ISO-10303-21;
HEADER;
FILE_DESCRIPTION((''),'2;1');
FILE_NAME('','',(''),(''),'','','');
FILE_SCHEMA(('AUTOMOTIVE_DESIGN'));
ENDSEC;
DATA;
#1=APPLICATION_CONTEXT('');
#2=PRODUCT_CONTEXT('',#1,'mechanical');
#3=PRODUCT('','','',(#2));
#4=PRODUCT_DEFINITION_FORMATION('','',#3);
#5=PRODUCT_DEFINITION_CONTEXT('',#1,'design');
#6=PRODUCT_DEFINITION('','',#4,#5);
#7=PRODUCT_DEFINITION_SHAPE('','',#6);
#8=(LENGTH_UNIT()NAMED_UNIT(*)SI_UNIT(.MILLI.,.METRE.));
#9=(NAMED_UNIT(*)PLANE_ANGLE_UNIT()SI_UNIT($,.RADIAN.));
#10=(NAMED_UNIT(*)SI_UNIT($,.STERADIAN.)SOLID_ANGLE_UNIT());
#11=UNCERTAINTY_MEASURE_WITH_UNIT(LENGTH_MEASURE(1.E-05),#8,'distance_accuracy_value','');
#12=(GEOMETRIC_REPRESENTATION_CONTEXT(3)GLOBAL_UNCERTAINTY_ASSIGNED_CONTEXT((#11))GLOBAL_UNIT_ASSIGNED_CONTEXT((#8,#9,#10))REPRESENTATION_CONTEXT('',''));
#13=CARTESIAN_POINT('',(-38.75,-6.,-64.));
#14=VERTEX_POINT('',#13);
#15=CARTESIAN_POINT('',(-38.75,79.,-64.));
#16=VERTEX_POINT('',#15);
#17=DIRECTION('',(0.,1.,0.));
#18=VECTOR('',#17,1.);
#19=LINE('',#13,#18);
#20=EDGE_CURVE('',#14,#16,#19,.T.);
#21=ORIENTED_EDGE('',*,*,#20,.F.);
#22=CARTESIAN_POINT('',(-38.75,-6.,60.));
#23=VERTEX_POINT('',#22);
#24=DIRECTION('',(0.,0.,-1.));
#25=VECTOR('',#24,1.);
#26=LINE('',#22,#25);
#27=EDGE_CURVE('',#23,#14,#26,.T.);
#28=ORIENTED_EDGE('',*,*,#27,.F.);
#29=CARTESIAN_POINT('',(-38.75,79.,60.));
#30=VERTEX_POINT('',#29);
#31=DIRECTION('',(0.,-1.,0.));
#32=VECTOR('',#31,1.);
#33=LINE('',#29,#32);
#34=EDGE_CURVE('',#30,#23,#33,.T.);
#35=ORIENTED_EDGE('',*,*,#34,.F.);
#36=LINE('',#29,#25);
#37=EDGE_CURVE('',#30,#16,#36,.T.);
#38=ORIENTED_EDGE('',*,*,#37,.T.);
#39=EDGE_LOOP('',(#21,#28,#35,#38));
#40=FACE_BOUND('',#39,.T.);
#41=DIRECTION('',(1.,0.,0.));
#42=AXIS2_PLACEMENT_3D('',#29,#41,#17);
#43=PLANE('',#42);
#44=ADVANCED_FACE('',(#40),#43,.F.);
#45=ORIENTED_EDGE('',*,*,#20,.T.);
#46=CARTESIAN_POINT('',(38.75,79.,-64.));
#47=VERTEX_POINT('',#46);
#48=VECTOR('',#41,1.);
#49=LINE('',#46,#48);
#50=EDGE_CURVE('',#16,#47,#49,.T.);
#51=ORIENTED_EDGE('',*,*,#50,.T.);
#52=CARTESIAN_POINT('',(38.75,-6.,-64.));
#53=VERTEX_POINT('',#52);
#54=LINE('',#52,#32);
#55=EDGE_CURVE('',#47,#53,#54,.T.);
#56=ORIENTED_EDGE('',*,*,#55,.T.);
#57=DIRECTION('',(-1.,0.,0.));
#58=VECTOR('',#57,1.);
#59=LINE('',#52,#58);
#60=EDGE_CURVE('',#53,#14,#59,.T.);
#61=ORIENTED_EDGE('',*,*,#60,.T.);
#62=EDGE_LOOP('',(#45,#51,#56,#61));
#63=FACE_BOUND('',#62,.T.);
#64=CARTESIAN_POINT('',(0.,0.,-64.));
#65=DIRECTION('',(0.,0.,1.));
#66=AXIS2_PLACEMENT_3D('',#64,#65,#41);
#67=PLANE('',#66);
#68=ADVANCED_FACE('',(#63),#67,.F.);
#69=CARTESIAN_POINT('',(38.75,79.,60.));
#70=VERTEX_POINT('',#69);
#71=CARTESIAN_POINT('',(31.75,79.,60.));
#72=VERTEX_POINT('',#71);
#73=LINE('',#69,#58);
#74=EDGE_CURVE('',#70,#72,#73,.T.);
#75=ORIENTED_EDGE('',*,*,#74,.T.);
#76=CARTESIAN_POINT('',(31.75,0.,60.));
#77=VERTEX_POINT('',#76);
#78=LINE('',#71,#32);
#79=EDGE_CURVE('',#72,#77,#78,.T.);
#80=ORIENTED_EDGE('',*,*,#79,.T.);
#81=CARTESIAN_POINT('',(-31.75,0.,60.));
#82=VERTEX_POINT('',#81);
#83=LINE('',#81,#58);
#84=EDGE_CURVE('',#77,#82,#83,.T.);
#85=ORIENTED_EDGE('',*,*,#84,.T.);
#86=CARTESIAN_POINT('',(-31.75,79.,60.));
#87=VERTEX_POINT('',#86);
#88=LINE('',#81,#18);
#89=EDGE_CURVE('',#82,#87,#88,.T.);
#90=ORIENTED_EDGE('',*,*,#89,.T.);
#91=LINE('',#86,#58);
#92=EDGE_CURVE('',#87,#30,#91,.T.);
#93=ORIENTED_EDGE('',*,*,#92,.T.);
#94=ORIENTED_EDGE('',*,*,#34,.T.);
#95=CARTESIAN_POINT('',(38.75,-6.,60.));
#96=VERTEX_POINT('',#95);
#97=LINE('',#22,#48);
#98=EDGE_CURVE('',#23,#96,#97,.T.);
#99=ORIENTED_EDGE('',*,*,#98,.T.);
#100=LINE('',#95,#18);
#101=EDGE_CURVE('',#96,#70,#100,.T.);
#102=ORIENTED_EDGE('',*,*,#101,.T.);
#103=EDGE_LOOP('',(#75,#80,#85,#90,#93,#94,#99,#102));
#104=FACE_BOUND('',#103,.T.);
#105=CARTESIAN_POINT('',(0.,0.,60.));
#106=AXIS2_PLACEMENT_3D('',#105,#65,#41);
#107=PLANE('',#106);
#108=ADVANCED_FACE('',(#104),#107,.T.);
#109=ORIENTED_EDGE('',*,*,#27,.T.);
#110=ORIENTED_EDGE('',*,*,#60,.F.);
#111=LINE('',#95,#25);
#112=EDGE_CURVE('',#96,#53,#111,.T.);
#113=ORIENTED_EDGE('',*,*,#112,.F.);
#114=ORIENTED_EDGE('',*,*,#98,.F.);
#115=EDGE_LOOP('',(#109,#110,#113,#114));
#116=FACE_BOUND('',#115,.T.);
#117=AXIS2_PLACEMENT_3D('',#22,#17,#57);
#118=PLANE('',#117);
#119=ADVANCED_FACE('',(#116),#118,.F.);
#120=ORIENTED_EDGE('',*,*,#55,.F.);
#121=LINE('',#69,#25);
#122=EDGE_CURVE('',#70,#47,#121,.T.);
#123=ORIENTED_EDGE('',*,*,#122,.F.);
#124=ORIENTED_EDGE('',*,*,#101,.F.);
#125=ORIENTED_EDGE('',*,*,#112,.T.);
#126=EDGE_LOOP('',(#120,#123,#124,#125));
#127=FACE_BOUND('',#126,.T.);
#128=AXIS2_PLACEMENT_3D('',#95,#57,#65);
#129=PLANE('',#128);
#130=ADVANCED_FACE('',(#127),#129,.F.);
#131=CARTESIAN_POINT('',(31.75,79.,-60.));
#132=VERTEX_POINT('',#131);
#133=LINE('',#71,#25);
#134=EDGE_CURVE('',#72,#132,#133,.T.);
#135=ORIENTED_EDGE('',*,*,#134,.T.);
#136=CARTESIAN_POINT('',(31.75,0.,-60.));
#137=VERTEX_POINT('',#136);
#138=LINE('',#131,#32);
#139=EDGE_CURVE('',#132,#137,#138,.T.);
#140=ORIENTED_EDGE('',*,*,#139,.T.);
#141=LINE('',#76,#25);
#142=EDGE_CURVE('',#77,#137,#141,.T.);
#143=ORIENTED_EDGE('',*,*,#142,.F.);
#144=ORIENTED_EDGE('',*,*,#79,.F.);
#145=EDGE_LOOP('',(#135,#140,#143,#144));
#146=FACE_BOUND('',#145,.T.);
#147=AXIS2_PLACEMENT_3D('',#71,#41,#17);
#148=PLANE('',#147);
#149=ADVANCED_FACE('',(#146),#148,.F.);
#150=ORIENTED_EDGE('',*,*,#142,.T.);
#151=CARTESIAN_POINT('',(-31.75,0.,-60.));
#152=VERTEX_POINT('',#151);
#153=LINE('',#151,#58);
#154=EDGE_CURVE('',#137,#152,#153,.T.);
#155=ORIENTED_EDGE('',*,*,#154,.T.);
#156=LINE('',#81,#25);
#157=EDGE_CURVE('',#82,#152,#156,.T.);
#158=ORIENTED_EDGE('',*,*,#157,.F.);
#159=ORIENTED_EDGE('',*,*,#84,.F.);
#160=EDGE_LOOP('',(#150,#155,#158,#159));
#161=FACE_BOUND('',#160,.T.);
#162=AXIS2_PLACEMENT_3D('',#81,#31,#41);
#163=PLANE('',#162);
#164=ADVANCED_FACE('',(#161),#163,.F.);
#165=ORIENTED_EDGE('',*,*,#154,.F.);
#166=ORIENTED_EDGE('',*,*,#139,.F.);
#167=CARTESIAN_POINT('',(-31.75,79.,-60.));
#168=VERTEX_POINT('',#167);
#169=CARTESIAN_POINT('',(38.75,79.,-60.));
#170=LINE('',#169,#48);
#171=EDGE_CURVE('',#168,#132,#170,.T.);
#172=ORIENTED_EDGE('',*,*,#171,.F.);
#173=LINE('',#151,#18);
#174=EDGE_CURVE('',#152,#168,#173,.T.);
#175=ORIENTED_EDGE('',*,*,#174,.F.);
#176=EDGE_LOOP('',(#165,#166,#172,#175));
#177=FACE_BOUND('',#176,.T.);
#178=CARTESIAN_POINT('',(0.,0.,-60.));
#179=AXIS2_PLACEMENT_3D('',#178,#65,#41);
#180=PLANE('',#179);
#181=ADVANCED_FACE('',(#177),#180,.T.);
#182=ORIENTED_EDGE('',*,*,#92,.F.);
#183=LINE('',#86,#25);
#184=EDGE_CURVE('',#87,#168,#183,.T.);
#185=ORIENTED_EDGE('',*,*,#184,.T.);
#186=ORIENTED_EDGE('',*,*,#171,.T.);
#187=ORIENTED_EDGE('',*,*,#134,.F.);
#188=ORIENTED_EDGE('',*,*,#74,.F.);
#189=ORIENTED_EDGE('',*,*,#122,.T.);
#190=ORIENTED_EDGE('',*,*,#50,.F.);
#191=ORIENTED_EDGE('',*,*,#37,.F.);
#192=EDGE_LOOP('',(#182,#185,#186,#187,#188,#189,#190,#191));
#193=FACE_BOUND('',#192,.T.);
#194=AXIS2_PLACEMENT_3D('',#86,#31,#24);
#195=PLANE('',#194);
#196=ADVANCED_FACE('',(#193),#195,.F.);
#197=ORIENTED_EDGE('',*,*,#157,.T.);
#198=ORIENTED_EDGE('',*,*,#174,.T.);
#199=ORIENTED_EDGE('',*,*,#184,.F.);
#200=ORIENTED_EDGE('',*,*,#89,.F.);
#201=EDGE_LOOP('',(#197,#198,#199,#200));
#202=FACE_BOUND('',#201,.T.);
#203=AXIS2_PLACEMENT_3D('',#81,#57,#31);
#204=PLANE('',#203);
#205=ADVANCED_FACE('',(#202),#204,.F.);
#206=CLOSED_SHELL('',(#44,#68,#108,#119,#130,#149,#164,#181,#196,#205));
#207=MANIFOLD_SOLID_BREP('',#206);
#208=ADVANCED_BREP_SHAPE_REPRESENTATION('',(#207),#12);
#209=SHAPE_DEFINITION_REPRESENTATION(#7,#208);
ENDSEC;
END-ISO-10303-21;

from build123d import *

# Parameters (mm, degrees)
BRKT_1_5_6_BOSS_EXTRUDE1_START       = -6
BRKT_1_5_6_BOSS_EXTRUDE1_OUTLINE_W   = 7
BRKT_1_5_6_BOSS_EXTRUDE1_OUTLINE_H   = 120
BRKT_1_5_6_BOSS_EXTRUDE1_DEPTH       = 85
BRKT_1_5_6_BOSS_EXTRUDE1_2_OUTLINE_W = 63.5
BRKT_1_5_6_BOSS_EXTRUDE1_2_OUTLINE_H = 120
BRKT_1_5_6_BOSS_EXTRUDE1_2_DEPTH     = 6
SKETCH1_W                            = 77.5
SKETCH1_H                            = 85
BOSS_EXTRUDE1_DEPTH                  = 4


# Read off the part's stored shape, not the designer's step: <BRKT_1_5_6>-<Boss-Extrude1>
with BuildPart() as part:
    # <BRKT_1_5_6>-<Boss-Extrude1> outline → <BRKT_1_5_6>-<Boss-Extrude1> (new body)
    with BuildSketch(Plane(origin=(0, 0, 0), x_dir=(1, 0, 0), z_dir=(0, 1, 0)).offset(BRKT_1_5_6_BOSS_EXTRUDE1_START)):
        with Locations((35.25, 0)):
            Rectangle(BRKT_1_5_6_BOSS_EXTRUDE1_OUTLINE_W, BRKT_1_5_6_BOSS_EXTRUDE1_OUTLINE_H)
        with Locations((-35.25, 0)):
            Rectangle(BRKT_1_5_6_BOSS_EXTRUDE1_OUTLINE_W, BRKT_1_5_6_BOSS_EXTRUDE1_OUTLINE_H)
    extrude(amount=BRKT_1_5_6_BOSS_EXTRUDE1_DEPTH)

    # BRKT_1_5_6_-_Boss-Extrude1 2 outline → BRKT_1_5_6_-_Boss-Extrude1 2 (add)
    with BuildSketch(Plane(origin=(0, 0, 0), x_dir=(1, 0, 0), z_dir=(0, 1, 0)).offset(BRKT_1_5_6_BOSS_EXTRUDE1_START)):
        Rectangle(BRKT_1_5_6_BOSS_EXTRUDE1_2_OUTLINE_W, BRKT_1_5_6_BOSS_EXTRUDE1_2_OUTLINE_H)
    extrude(amount=BRKT_1_5_6_BOSS_EXTRUDE1_2_DEPTH)

    # Sketch1 → Boss-Extrude1 (add)
    with BuildSketch(Plane(origin=(0, 0, -60), x_dir=(-1, 0, 0), z_dir=(0, 0, -1))):
        with Locations((0, 36.5)):
            Rectangle(SKETCH1_W, SKETCH1_H)
    extrude(amount=BOSS_EXTRUDE1_DEPTH)


solid = part.part
